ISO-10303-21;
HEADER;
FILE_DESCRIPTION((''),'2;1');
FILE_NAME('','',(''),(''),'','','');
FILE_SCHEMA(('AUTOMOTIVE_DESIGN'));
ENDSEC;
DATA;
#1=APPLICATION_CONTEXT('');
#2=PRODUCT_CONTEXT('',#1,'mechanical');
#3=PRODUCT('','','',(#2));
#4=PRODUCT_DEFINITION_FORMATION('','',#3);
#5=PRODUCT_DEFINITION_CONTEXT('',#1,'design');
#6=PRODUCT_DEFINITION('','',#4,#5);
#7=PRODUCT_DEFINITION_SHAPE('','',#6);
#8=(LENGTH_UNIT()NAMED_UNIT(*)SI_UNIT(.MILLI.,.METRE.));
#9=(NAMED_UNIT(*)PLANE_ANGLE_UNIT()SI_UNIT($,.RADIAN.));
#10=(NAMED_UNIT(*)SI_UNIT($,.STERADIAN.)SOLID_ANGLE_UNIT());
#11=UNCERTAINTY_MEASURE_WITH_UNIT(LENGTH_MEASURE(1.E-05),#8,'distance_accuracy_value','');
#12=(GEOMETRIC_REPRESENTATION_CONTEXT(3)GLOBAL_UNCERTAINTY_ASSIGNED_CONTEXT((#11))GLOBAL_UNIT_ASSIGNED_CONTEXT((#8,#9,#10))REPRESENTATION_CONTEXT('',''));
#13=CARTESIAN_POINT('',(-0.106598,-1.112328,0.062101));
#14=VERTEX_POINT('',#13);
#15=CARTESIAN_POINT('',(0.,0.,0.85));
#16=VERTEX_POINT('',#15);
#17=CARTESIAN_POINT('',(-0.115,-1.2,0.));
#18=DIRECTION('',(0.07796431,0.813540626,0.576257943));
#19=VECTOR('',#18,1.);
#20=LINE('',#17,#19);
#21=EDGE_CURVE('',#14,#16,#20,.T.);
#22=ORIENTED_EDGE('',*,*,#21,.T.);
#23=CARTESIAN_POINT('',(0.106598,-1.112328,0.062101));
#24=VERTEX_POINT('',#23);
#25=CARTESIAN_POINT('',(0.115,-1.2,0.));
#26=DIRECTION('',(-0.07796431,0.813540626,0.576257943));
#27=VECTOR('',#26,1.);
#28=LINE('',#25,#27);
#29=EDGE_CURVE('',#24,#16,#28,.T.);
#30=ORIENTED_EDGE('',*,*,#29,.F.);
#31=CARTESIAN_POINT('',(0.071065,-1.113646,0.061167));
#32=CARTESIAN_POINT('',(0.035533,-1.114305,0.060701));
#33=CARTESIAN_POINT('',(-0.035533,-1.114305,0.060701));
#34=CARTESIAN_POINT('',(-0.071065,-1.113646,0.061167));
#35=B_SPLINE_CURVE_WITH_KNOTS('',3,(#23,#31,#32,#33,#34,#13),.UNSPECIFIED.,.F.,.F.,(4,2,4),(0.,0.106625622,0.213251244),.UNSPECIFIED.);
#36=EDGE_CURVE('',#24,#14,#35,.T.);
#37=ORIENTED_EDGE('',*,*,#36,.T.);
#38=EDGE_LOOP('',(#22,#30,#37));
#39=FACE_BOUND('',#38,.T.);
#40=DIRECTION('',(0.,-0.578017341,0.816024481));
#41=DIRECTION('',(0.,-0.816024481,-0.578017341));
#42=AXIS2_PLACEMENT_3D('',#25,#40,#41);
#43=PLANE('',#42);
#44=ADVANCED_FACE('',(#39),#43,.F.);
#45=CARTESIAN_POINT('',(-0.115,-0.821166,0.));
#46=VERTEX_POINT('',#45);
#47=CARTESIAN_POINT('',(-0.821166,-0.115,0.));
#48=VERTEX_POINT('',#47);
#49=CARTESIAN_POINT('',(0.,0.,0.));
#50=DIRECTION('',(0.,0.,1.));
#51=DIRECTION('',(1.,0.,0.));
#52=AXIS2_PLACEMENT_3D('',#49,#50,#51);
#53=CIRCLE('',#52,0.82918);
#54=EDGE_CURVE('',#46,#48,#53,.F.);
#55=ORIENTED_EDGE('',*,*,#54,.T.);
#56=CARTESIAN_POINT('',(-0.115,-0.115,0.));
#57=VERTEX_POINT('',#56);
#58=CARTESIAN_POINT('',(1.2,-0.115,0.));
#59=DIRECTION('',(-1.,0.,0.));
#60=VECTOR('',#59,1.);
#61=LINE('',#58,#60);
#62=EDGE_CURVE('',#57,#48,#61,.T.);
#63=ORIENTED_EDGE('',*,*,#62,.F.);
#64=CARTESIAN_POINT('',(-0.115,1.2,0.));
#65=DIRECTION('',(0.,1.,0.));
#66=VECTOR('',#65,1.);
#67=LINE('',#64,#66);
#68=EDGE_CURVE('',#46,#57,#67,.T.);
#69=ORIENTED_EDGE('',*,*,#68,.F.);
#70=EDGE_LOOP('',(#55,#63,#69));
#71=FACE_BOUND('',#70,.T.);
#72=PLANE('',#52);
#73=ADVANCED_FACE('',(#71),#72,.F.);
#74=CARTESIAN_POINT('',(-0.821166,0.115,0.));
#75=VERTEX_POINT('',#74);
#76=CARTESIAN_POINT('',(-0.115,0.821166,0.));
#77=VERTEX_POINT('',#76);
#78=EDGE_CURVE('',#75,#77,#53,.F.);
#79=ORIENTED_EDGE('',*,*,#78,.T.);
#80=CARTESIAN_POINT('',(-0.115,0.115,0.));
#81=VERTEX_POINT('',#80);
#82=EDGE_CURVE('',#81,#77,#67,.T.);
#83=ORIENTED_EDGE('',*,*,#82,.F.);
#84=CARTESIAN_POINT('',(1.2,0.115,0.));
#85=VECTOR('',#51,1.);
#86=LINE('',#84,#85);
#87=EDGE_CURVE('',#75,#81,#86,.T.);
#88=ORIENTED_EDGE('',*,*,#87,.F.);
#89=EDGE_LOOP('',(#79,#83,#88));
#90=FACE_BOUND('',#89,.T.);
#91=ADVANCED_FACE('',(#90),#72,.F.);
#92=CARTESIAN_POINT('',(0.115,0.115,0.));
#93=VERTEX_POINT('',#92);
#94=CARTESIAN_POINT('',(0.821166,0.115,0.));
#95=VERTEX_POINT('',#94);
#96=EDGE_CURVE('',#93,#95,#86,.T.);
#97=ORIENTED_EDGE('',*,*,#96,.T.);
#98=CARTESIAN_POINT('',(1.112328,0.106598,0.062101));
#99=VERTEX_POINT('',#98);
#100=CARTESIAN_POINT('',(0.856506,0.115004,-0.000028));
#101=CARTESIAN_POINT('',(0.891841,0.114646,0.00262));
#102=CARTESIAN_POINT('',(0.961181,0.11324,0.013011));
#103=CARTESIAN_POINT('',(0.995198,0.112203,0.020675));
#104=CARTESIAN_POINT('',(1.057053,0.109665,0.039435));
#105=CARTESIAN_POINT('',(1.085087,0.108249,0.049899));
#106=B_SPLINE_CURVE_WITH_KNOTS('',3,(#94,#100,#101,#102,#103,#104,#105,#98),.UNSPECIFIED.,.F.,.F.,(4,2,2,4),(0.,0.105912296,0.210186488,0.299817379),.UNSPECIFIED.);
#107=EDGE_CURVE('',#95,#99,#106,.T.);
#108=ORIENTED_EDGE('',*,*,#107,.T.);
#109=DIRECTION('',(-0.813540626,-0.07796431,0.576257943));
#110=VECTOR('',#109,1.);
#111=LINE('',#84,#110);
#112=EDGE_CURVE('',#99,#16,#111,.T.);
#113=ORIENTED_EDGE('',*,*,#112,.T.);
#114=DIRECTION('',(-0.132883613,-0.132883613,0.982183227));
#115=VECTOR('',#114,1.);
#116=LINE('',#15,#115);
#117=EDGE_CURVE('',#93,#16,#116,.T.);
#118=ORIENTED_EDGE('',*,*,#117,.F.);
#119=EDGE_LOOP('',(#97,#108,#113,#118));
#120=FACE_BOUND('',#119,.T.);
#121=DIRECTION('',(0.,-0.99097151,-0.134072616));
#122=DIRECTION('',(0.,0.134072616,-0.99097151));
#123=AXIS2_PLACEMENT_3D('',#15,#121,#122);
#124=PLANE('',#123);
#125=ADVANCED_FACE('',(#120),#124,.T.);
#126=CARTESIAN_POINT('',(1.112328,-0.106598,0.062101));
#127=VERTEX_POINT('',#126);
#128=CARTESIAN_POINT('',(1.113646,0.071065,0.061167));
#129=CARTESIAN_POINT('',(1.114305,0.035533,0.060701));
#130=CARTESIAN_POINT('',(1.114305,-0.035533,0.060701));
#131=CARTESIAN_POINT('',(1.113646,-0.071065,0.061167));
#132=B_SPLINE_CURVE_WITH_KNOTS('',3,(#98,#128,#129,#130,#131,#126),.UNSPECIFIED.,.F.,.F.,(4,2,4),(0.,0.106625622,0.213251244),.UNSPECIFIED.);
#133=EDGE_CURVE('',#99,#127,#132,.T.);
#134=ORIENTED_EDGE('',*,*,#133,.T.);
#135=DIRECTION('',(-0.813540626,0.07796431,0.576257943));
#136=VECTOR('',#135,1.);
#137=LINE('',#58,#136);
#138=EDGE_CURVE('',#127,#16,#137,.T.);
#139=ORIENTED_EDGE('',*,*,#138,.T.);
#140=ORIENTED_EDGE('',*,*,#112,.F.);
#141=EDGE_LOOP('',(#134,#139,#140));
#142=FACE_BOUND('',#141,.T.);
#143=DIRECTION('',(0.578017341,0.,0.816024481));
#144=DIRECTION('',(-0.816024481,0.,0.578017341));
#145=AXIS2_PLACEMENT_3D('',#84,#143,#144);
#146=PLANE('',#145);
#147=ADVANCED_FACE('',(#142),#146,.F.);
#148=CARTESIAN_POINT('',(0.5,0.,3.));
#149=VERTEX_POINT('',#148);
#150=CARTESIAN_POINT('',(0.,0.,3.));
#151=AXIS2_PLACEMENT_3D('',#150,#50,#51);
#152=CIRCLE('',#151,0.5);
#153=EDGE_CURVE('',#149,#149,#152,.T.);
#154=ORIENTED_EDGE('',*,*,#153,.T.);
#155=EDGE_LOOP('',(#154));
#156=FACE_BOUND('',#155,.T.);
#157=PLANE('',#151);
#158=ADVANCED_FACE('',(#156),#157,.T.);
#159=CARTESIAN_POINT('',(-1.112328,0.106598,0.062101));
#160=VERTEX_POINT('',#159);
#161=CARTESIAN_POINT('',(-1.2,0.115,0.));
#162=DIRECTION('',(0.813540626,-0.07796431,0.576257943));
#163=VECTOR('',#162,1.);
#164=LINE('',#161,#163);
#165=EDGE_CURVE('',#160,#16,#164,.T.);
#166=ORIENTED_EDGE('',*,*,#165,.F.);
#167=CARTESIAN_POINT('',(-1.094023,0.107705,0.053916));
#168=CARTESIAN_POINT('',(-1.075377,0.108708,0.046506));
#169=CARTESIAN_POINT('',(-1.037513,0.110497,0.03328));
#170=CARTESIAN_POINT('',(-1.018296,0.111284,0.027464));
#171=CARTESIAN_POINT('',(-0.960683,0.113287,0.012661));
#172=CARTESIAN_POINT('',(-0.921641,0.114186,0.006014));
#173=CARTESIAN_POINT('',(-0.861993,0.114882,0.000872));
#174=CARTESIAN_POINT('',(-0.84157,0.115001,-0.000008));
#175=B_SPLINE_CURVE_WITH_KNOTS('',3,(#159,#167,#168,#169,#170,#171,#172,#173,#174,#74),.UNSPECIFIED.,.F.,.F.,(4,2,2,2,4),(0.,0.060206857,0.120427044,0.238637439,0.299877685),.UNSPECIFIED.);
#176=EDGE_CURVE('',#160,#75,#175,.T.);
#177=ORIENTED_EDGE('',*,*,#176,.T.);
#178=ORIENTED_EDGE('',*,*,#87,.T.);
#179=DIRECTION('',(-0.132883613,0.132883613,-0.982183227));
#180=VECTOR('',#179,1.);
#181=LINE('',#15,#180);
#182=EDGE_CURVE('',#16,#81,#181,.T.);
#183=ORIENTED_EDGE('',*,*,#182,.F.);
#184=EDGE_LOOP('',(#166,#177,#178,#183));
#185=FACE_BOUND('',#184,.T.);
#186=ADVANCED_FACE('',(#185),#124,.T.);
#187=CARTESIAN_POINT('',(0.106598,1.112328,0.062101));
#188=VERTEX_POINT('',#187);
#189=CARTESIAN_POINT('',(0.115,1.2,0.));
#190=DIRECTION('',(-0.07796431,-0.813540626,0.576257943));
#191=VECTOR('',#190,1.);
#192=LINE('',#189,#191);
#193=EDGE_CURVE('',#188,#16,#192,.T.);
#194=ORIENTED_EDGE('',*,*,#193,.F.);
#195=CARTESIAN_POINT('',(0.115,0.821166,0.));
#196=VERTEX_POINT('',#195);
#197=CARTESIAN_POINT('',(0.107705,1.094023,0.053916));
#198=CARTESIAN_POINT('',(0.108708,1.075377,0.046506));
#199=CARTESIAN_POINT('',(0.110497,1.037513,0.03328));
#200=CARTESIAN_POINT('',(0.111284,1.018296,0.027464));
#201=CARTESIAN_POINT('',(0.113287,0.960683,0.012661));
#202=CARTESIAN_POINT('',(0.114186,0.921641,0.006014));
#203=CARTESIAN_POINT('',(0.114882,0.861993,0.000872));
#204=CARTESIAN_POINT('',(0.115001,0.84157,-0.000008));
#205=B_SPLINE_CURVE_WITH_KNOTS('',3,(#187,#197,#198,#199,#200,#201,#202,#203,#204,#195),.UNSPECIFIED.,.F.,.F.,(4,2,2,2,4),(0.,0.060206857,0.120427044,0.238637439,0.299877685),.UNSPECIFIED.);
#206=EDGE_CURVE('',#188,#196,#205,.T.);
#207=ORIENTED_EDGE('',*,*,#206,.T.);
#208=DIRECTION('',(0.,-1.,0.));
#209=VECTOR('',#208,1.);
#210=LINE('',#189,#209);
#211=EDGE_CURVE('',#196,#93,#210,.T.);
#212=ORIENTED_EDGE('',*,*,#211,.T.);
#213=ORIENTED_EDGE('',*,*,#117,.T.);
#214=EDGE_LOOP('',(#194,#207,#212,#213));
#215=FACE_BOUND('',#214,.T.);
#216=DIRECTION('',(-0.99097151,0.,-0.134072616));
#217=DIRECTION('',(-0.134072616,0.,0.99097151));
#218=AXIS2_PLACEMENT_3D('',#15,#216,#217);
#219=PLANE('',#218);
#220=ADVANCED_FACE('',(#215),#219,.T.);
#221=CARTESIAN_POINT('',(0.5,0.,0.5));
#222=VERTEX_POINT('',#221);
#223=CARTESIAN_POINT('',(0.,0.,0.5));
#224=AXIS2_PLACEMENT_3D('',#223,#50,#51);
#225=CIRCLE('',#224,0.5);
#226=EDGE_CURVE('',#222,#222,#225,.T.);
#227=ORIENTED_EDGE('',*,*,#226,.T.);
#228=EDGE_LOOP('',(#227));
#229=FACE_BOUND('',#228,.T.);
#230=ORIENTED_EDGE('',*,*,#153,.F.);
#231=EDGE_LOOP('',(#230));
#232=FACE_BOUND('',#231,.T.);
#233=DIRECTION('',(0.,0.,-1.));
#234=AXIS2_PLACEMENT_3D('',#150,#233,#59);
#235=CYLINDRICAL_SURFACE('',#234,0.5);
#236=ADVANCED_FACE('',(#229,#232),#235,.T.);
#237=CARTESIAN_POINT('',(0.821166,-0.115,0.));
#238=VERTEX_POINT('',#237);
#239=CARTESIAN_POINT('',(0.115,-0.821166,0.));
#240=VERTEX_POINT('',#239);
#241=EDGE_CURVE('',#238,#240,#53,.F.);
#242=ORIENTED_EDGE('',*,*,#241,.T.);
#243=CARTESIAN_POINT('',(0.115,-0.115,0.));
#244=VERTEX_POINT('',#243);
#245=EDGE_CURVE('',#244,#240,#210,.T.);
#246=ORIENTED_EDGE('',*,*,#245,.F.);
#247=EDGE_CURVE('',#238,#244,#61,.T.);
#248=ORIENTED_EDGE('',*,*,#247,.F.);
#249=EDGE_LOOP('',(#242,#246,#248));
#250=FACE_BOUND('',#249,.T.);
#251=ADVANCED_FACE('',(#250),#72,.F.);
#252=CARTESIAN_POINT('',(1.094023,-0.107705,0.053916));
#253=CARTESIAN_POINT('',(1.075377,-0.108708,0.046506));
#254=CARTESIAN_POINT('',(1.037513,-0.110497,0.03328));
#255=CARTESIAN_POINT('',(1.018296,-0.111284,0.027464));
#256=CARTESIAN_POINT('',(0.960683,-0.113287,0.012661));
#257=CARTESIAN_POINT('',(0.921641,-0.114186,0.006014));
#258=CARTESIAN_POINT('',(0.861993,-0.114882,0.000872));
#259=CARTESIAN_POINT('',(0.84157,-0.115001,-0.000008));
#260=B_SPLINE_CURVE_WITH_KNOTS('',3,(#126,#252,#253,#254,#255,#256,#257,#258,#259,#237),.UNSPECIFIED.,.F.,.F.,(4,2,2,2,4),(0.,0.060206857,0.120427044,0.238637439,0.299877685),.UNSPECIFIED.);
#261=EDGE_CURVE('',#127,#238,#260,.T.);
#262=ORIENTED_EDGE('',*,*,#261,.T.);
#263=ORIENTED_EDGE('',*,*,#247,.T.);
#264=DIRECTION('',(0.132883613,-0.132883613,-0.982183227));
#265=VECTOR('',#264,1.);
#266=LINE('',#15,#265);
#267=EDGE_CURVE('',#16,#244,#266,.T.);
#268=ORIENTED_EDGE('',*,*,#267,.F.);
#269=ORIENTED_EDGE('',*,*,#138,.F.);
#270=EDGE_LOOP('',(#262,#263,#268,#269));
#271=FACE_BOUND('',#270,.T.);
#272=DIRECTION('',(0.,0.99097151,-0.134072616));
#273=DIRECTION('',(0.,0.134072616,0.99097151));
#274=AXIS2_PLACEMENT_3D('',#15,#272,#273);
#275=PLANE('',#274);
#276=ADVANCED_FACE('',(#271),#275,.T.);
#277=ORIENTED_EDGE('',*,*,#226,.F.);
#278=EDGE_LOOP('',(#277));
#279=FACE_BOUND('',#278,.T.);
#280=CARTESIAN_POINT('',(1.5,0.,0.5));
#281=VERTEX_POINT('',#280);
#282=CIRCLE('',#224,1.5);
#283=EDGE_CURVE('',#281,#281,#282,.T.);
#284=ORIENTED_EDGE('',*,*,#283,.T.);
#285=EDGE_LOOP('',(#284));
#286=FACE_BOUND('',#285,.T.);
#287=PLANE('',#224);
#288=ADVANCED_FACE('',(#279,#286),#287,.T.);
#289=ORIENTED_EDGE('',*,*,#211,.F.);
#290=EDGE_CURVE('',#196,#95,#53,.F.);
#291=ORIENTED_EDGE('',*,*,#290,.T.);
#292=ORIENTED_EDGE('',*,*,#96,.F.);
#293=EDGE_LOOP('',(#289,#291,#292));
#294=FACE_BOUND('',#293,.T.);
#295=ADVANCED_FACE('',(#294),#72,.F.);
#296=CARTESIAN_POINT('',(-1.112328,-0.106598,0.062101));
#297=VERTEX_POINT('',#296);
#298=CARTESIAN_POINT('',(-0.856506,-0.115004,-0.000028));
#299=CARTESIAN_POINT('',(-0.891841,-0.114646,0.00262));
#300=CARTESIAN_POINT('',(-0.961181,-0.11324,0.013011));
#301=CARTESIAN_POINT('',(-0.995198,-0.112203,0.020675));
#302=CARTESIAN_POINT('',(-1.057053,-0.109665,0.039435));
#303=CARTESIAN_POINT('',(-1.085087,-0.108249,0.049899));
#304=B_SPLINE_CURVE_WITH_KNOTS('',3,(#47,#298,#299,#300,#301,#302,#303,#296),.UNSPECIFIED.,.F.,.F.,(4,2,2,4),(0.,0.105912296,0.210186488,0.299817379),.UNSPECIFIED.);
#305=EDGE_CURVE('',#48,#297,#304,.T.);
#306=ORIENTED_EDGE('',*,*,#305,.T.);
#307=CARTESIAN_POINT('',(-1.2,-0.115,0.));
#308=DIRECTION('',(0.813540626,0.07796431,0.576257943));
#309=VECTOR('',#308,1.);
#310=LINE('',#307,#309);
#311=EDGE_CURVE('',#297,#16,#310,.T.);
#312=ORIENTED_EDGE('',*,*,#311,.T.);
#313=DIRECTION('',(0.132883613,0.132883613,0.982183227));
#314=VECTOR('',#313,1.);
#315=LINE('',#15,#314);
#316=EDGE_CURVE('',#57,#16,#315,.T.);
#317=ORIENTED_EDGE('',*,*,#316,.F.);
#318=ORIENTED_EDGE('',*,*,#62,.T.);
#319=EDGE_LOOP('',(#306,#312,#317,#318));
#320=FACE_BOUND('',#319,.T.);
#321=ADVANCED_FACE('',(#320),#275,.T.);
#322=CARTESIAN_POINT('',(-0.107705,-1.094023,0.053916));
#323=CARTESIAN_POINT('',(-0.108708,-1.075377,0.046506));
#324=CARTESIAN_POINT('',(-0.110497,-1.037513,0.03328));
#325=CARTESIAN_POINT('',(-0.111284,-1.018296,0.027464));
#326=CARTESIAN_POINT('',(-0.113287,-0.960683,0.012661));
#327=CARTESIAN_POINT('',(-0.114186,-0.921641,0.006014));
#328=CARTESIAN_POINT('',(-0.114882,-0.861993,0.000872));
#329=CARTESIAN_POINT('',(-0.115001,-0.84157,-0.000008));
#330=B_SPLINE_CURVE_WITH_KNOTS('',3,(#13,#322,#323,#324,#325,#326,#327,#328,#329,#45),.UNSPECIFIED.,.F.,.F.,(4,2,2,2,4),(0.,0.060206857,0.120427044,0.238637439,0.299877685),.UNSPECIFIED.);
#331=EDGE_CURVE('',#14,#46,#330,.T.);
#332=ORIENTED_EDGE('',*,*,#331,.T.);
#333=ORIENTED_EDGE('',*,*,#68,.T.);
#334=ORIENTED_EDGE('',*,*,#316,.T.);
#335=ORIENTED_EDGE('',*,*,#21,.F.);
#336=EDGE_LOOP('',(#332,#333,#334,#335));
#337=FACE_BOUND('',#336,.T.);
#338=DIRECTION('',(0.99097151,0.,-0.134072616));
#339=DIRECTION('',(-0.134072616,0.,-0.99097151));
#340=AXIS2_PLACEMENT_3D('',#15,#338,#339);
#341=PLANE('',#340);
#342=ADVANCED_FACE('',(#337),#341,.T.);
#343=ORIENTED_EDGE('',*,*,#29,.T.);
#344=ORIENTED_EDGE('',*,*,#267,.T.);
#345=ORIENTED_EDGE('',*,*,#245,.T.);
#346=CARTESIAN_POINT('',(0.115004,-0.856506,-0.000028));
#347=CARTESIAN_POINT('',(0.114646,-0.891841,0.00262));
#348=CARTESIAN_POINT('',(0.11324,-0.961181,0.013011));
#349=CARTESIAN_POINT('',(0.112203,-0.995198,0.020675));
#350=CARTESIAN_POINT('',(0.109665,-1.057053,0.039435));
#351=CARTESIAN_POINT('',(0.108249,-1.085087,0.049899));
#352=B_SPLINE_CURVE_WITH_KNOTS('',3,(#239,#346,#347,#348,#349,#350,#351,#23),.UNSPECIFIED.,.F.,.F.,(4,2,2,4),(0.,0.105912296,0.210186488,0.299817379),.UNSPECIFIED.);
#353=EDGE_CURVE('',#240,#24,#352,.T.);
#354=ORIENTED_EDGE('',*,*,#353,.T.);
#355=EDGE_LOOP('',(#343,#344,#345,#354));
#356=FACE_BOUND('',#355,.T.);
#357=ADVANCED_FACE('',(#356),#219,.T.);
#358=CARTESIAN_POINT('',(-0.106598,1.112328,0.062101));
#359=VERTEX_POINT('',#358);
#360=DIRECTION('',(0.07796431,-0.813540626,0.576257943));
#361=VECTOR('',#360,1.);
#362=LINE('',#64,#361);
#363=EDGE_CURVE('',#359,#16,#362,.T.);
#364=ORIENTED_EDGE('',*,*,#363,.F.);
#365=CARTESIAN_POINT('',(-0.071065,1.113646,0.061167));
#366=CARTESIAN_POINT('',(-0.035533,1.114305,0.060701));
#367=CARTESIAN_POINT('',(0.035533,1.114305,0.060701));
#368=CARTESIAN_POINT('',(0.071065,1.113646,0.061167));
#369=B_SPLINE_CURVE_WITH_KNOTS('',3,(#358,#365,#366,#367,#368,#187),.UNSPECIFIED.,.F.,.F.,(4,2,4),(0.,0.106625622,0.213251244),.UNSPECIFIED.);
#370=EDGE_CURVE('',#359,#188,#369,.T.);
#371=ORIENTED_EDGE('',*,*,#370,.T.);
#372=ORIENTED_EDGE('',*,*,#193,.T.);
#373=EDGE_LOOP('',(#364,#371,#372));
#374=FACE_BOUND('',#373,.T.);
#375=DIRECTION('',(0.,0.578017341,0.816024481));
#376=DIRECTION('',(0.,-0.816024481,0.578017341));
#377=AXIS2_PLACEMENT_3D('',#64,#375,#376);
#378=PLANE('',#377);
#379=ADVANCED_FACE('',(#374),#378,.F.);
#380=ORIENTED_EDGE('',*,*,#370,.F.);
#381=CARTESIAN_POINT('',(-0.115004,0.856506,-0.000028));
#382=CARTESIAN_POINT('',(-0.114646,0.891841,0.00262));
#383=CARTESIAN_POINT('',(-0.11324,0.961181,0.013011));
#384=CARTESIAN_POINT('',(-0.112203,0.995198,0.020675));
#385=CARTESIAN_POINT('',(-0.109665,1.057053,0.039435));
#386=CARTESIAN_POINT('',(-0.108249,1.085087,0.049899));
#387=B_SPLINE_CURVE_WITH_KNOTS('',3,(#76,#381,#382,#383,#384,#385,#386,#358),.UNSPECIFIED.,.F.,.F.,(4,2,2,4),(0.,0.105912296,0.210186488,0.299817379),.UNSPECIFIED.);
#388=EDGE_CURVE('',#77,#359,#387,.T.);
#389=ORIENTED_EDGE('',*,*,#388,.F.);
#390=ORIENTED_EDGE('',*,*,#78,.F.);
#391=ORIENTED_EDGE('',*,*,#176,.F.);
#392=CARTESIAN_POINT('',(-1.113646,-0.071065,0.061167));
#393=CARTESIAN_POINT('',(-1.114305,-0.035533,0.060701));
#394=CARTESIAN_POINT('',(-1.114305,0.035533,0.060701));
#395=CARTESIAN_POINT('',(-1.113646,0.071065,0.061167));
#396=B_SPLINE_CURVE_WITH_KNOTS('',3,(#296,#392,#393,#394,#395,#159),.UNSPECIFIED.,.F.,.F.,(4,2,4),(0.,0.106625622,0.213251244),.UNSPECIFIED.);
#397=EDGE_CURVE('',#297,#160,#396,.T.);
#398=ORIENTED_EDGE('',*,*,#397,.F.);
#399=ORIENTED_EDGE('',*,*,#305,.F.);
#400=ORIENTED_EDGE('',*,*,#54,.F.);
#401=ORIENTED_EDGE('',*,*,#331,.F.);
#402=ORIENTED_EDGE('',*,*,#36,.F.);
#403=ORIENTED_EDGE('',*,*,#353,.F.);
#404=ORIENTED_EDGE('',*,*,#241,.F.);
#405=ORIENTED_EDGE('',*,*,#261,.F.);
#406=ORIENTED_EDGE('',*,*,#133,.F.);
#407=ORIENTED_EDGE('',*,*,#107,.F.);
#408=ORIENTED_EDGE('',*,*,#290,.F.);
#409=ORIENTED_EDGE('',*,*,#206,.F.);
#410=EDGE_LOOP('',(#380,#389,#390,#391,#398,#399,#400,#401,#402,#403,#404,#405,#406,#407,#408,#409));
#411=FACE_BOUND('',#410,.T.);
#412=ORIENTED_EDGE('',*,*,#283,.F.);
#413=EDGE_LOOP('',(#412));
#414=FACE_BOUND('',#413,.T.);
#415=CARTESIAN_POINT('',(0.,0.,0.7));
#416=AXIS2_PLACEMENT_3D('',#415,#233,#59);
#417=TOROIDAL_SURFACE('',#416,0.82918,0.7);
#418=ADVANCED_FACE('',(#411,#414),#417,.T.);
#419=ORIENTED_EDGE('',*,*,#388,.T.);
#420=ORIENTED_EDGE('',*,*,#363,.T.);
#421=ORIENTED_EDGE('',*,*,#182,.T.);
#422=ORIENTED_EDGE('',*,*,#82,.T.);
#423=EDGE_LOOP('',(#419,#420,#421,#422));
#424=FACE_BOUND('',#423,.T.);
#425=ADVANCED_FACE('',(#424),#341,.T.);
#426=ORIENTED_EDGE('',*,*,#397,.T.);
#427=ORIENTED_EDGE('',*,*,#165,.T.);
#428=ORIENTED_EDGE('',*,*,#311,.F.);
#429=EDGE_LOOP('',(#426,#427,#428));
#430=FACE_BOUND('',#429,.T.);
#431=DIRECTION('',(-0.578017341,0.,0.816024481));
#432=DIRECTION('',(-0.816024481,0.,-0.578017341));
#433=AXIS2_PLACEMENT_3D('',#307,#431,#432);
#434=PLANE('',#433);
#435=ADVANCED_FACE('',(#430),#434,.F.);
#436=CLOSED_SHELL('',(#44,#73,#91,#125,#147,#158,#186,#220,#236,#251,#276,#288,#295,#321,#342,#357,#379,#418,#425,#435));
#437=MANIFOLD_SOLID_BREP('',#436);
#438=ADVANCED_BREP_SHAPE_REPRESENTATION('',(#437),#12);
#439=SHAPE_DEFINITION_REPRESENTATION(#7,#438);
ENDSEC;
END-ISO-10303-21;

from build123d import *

# Parameters (mm, degrees)
SKETCH_1_R               = 1.5
EXTRUDE_1_DEPTH          = 0.5
SKETCH_2_R               = 0.5
EXTRUDE_2_DEPTH          = 2.5
PATTERN_CIRCULAR_1_COUNT = 4
FILLET_2_R               = 0.7


with BuildPart() as part:
    # 草圖1 → 伸長1 (new body)
    with BuildSketch(Plane.XY):
        Circle(SKETCH_1_R)
    extrude(amount=EXTRUDE_1_DEPTH)

    # 草圖2 → 伸長2 (add)
    with BuildSketch(Plane.XY.offset(0.5)):
        Circle(SKETCH_2_R)
    extrude(amount=EXTRUDE_2_DEPTH)

    # 草圖3 → 除料-疊層拉伸1 section 0
    with BuildSketch(Plane(origin=(0, 0, 0), x_dir=(-1, 0, 0), z_dir=(0, 0, -1)), mode=Mode.PRIVATE) as loft_1_s0:
        with BuildLine():
            Line((-0.115, 1.2), (0.115, 1.2))
            Line((0.115, 1.2), (0.115, -1.2))
            Line((0.115, -1.2), (-0.115, -1.2))
            Line((-0.115, -1.2), (-0.115, 1.2))
        make_face()
    loft_1 = loft([loft_1_s0.sketch, Vertex(0, 0, 0.85)], mode=Mode.SUBTRACT)

    # 環狀複製排列1: 除料-疊層拉伸1 ×4 about axis
    pattern_circular_1_axis = Axis((0, 0, 0), (0, 0, 1))
    for i in range(1, PATTERN_CIRCULAR_1_COUNT):
        add(loft_1.rotate(pattern_circular_1_axis, i * 360 / PATTERN_CIRCULAR_1_COUNT), mode=Mode.SUBTRACT)

    # 圓角2
    # the kernel refuses this fillet: 0.7 mm, written as the material it takes off along each edge
    with BuildSketch(Plane(origin=(0, 0, 0), x_dir=(1, 0, 0), z_dir=(0, -1, 0))) as fillet_2_piece_1:
        with BuildLine():
            CenterArc((0.829179607, 0.7), FILLET_2_R, 270, 73.398450401)
            Line((0.829179607, 0), (0.829179607, -0.014))
            Line((0.829179607, -0.014), (1.5, -0.014))
            Line((1.5, -0.014), (1.514, 0))
            ThreePointArc((1.514, 0), (1.514, 0.25), (1.513416408, 0.496))
            Line((1.513416408, 0.496), (1.5, 0.5))
        make_face()
    revolve(axis=Axis((0, 0, 0), (0, 0, 1)), mode=Mode.SUBTRACT)


solid = part.part
